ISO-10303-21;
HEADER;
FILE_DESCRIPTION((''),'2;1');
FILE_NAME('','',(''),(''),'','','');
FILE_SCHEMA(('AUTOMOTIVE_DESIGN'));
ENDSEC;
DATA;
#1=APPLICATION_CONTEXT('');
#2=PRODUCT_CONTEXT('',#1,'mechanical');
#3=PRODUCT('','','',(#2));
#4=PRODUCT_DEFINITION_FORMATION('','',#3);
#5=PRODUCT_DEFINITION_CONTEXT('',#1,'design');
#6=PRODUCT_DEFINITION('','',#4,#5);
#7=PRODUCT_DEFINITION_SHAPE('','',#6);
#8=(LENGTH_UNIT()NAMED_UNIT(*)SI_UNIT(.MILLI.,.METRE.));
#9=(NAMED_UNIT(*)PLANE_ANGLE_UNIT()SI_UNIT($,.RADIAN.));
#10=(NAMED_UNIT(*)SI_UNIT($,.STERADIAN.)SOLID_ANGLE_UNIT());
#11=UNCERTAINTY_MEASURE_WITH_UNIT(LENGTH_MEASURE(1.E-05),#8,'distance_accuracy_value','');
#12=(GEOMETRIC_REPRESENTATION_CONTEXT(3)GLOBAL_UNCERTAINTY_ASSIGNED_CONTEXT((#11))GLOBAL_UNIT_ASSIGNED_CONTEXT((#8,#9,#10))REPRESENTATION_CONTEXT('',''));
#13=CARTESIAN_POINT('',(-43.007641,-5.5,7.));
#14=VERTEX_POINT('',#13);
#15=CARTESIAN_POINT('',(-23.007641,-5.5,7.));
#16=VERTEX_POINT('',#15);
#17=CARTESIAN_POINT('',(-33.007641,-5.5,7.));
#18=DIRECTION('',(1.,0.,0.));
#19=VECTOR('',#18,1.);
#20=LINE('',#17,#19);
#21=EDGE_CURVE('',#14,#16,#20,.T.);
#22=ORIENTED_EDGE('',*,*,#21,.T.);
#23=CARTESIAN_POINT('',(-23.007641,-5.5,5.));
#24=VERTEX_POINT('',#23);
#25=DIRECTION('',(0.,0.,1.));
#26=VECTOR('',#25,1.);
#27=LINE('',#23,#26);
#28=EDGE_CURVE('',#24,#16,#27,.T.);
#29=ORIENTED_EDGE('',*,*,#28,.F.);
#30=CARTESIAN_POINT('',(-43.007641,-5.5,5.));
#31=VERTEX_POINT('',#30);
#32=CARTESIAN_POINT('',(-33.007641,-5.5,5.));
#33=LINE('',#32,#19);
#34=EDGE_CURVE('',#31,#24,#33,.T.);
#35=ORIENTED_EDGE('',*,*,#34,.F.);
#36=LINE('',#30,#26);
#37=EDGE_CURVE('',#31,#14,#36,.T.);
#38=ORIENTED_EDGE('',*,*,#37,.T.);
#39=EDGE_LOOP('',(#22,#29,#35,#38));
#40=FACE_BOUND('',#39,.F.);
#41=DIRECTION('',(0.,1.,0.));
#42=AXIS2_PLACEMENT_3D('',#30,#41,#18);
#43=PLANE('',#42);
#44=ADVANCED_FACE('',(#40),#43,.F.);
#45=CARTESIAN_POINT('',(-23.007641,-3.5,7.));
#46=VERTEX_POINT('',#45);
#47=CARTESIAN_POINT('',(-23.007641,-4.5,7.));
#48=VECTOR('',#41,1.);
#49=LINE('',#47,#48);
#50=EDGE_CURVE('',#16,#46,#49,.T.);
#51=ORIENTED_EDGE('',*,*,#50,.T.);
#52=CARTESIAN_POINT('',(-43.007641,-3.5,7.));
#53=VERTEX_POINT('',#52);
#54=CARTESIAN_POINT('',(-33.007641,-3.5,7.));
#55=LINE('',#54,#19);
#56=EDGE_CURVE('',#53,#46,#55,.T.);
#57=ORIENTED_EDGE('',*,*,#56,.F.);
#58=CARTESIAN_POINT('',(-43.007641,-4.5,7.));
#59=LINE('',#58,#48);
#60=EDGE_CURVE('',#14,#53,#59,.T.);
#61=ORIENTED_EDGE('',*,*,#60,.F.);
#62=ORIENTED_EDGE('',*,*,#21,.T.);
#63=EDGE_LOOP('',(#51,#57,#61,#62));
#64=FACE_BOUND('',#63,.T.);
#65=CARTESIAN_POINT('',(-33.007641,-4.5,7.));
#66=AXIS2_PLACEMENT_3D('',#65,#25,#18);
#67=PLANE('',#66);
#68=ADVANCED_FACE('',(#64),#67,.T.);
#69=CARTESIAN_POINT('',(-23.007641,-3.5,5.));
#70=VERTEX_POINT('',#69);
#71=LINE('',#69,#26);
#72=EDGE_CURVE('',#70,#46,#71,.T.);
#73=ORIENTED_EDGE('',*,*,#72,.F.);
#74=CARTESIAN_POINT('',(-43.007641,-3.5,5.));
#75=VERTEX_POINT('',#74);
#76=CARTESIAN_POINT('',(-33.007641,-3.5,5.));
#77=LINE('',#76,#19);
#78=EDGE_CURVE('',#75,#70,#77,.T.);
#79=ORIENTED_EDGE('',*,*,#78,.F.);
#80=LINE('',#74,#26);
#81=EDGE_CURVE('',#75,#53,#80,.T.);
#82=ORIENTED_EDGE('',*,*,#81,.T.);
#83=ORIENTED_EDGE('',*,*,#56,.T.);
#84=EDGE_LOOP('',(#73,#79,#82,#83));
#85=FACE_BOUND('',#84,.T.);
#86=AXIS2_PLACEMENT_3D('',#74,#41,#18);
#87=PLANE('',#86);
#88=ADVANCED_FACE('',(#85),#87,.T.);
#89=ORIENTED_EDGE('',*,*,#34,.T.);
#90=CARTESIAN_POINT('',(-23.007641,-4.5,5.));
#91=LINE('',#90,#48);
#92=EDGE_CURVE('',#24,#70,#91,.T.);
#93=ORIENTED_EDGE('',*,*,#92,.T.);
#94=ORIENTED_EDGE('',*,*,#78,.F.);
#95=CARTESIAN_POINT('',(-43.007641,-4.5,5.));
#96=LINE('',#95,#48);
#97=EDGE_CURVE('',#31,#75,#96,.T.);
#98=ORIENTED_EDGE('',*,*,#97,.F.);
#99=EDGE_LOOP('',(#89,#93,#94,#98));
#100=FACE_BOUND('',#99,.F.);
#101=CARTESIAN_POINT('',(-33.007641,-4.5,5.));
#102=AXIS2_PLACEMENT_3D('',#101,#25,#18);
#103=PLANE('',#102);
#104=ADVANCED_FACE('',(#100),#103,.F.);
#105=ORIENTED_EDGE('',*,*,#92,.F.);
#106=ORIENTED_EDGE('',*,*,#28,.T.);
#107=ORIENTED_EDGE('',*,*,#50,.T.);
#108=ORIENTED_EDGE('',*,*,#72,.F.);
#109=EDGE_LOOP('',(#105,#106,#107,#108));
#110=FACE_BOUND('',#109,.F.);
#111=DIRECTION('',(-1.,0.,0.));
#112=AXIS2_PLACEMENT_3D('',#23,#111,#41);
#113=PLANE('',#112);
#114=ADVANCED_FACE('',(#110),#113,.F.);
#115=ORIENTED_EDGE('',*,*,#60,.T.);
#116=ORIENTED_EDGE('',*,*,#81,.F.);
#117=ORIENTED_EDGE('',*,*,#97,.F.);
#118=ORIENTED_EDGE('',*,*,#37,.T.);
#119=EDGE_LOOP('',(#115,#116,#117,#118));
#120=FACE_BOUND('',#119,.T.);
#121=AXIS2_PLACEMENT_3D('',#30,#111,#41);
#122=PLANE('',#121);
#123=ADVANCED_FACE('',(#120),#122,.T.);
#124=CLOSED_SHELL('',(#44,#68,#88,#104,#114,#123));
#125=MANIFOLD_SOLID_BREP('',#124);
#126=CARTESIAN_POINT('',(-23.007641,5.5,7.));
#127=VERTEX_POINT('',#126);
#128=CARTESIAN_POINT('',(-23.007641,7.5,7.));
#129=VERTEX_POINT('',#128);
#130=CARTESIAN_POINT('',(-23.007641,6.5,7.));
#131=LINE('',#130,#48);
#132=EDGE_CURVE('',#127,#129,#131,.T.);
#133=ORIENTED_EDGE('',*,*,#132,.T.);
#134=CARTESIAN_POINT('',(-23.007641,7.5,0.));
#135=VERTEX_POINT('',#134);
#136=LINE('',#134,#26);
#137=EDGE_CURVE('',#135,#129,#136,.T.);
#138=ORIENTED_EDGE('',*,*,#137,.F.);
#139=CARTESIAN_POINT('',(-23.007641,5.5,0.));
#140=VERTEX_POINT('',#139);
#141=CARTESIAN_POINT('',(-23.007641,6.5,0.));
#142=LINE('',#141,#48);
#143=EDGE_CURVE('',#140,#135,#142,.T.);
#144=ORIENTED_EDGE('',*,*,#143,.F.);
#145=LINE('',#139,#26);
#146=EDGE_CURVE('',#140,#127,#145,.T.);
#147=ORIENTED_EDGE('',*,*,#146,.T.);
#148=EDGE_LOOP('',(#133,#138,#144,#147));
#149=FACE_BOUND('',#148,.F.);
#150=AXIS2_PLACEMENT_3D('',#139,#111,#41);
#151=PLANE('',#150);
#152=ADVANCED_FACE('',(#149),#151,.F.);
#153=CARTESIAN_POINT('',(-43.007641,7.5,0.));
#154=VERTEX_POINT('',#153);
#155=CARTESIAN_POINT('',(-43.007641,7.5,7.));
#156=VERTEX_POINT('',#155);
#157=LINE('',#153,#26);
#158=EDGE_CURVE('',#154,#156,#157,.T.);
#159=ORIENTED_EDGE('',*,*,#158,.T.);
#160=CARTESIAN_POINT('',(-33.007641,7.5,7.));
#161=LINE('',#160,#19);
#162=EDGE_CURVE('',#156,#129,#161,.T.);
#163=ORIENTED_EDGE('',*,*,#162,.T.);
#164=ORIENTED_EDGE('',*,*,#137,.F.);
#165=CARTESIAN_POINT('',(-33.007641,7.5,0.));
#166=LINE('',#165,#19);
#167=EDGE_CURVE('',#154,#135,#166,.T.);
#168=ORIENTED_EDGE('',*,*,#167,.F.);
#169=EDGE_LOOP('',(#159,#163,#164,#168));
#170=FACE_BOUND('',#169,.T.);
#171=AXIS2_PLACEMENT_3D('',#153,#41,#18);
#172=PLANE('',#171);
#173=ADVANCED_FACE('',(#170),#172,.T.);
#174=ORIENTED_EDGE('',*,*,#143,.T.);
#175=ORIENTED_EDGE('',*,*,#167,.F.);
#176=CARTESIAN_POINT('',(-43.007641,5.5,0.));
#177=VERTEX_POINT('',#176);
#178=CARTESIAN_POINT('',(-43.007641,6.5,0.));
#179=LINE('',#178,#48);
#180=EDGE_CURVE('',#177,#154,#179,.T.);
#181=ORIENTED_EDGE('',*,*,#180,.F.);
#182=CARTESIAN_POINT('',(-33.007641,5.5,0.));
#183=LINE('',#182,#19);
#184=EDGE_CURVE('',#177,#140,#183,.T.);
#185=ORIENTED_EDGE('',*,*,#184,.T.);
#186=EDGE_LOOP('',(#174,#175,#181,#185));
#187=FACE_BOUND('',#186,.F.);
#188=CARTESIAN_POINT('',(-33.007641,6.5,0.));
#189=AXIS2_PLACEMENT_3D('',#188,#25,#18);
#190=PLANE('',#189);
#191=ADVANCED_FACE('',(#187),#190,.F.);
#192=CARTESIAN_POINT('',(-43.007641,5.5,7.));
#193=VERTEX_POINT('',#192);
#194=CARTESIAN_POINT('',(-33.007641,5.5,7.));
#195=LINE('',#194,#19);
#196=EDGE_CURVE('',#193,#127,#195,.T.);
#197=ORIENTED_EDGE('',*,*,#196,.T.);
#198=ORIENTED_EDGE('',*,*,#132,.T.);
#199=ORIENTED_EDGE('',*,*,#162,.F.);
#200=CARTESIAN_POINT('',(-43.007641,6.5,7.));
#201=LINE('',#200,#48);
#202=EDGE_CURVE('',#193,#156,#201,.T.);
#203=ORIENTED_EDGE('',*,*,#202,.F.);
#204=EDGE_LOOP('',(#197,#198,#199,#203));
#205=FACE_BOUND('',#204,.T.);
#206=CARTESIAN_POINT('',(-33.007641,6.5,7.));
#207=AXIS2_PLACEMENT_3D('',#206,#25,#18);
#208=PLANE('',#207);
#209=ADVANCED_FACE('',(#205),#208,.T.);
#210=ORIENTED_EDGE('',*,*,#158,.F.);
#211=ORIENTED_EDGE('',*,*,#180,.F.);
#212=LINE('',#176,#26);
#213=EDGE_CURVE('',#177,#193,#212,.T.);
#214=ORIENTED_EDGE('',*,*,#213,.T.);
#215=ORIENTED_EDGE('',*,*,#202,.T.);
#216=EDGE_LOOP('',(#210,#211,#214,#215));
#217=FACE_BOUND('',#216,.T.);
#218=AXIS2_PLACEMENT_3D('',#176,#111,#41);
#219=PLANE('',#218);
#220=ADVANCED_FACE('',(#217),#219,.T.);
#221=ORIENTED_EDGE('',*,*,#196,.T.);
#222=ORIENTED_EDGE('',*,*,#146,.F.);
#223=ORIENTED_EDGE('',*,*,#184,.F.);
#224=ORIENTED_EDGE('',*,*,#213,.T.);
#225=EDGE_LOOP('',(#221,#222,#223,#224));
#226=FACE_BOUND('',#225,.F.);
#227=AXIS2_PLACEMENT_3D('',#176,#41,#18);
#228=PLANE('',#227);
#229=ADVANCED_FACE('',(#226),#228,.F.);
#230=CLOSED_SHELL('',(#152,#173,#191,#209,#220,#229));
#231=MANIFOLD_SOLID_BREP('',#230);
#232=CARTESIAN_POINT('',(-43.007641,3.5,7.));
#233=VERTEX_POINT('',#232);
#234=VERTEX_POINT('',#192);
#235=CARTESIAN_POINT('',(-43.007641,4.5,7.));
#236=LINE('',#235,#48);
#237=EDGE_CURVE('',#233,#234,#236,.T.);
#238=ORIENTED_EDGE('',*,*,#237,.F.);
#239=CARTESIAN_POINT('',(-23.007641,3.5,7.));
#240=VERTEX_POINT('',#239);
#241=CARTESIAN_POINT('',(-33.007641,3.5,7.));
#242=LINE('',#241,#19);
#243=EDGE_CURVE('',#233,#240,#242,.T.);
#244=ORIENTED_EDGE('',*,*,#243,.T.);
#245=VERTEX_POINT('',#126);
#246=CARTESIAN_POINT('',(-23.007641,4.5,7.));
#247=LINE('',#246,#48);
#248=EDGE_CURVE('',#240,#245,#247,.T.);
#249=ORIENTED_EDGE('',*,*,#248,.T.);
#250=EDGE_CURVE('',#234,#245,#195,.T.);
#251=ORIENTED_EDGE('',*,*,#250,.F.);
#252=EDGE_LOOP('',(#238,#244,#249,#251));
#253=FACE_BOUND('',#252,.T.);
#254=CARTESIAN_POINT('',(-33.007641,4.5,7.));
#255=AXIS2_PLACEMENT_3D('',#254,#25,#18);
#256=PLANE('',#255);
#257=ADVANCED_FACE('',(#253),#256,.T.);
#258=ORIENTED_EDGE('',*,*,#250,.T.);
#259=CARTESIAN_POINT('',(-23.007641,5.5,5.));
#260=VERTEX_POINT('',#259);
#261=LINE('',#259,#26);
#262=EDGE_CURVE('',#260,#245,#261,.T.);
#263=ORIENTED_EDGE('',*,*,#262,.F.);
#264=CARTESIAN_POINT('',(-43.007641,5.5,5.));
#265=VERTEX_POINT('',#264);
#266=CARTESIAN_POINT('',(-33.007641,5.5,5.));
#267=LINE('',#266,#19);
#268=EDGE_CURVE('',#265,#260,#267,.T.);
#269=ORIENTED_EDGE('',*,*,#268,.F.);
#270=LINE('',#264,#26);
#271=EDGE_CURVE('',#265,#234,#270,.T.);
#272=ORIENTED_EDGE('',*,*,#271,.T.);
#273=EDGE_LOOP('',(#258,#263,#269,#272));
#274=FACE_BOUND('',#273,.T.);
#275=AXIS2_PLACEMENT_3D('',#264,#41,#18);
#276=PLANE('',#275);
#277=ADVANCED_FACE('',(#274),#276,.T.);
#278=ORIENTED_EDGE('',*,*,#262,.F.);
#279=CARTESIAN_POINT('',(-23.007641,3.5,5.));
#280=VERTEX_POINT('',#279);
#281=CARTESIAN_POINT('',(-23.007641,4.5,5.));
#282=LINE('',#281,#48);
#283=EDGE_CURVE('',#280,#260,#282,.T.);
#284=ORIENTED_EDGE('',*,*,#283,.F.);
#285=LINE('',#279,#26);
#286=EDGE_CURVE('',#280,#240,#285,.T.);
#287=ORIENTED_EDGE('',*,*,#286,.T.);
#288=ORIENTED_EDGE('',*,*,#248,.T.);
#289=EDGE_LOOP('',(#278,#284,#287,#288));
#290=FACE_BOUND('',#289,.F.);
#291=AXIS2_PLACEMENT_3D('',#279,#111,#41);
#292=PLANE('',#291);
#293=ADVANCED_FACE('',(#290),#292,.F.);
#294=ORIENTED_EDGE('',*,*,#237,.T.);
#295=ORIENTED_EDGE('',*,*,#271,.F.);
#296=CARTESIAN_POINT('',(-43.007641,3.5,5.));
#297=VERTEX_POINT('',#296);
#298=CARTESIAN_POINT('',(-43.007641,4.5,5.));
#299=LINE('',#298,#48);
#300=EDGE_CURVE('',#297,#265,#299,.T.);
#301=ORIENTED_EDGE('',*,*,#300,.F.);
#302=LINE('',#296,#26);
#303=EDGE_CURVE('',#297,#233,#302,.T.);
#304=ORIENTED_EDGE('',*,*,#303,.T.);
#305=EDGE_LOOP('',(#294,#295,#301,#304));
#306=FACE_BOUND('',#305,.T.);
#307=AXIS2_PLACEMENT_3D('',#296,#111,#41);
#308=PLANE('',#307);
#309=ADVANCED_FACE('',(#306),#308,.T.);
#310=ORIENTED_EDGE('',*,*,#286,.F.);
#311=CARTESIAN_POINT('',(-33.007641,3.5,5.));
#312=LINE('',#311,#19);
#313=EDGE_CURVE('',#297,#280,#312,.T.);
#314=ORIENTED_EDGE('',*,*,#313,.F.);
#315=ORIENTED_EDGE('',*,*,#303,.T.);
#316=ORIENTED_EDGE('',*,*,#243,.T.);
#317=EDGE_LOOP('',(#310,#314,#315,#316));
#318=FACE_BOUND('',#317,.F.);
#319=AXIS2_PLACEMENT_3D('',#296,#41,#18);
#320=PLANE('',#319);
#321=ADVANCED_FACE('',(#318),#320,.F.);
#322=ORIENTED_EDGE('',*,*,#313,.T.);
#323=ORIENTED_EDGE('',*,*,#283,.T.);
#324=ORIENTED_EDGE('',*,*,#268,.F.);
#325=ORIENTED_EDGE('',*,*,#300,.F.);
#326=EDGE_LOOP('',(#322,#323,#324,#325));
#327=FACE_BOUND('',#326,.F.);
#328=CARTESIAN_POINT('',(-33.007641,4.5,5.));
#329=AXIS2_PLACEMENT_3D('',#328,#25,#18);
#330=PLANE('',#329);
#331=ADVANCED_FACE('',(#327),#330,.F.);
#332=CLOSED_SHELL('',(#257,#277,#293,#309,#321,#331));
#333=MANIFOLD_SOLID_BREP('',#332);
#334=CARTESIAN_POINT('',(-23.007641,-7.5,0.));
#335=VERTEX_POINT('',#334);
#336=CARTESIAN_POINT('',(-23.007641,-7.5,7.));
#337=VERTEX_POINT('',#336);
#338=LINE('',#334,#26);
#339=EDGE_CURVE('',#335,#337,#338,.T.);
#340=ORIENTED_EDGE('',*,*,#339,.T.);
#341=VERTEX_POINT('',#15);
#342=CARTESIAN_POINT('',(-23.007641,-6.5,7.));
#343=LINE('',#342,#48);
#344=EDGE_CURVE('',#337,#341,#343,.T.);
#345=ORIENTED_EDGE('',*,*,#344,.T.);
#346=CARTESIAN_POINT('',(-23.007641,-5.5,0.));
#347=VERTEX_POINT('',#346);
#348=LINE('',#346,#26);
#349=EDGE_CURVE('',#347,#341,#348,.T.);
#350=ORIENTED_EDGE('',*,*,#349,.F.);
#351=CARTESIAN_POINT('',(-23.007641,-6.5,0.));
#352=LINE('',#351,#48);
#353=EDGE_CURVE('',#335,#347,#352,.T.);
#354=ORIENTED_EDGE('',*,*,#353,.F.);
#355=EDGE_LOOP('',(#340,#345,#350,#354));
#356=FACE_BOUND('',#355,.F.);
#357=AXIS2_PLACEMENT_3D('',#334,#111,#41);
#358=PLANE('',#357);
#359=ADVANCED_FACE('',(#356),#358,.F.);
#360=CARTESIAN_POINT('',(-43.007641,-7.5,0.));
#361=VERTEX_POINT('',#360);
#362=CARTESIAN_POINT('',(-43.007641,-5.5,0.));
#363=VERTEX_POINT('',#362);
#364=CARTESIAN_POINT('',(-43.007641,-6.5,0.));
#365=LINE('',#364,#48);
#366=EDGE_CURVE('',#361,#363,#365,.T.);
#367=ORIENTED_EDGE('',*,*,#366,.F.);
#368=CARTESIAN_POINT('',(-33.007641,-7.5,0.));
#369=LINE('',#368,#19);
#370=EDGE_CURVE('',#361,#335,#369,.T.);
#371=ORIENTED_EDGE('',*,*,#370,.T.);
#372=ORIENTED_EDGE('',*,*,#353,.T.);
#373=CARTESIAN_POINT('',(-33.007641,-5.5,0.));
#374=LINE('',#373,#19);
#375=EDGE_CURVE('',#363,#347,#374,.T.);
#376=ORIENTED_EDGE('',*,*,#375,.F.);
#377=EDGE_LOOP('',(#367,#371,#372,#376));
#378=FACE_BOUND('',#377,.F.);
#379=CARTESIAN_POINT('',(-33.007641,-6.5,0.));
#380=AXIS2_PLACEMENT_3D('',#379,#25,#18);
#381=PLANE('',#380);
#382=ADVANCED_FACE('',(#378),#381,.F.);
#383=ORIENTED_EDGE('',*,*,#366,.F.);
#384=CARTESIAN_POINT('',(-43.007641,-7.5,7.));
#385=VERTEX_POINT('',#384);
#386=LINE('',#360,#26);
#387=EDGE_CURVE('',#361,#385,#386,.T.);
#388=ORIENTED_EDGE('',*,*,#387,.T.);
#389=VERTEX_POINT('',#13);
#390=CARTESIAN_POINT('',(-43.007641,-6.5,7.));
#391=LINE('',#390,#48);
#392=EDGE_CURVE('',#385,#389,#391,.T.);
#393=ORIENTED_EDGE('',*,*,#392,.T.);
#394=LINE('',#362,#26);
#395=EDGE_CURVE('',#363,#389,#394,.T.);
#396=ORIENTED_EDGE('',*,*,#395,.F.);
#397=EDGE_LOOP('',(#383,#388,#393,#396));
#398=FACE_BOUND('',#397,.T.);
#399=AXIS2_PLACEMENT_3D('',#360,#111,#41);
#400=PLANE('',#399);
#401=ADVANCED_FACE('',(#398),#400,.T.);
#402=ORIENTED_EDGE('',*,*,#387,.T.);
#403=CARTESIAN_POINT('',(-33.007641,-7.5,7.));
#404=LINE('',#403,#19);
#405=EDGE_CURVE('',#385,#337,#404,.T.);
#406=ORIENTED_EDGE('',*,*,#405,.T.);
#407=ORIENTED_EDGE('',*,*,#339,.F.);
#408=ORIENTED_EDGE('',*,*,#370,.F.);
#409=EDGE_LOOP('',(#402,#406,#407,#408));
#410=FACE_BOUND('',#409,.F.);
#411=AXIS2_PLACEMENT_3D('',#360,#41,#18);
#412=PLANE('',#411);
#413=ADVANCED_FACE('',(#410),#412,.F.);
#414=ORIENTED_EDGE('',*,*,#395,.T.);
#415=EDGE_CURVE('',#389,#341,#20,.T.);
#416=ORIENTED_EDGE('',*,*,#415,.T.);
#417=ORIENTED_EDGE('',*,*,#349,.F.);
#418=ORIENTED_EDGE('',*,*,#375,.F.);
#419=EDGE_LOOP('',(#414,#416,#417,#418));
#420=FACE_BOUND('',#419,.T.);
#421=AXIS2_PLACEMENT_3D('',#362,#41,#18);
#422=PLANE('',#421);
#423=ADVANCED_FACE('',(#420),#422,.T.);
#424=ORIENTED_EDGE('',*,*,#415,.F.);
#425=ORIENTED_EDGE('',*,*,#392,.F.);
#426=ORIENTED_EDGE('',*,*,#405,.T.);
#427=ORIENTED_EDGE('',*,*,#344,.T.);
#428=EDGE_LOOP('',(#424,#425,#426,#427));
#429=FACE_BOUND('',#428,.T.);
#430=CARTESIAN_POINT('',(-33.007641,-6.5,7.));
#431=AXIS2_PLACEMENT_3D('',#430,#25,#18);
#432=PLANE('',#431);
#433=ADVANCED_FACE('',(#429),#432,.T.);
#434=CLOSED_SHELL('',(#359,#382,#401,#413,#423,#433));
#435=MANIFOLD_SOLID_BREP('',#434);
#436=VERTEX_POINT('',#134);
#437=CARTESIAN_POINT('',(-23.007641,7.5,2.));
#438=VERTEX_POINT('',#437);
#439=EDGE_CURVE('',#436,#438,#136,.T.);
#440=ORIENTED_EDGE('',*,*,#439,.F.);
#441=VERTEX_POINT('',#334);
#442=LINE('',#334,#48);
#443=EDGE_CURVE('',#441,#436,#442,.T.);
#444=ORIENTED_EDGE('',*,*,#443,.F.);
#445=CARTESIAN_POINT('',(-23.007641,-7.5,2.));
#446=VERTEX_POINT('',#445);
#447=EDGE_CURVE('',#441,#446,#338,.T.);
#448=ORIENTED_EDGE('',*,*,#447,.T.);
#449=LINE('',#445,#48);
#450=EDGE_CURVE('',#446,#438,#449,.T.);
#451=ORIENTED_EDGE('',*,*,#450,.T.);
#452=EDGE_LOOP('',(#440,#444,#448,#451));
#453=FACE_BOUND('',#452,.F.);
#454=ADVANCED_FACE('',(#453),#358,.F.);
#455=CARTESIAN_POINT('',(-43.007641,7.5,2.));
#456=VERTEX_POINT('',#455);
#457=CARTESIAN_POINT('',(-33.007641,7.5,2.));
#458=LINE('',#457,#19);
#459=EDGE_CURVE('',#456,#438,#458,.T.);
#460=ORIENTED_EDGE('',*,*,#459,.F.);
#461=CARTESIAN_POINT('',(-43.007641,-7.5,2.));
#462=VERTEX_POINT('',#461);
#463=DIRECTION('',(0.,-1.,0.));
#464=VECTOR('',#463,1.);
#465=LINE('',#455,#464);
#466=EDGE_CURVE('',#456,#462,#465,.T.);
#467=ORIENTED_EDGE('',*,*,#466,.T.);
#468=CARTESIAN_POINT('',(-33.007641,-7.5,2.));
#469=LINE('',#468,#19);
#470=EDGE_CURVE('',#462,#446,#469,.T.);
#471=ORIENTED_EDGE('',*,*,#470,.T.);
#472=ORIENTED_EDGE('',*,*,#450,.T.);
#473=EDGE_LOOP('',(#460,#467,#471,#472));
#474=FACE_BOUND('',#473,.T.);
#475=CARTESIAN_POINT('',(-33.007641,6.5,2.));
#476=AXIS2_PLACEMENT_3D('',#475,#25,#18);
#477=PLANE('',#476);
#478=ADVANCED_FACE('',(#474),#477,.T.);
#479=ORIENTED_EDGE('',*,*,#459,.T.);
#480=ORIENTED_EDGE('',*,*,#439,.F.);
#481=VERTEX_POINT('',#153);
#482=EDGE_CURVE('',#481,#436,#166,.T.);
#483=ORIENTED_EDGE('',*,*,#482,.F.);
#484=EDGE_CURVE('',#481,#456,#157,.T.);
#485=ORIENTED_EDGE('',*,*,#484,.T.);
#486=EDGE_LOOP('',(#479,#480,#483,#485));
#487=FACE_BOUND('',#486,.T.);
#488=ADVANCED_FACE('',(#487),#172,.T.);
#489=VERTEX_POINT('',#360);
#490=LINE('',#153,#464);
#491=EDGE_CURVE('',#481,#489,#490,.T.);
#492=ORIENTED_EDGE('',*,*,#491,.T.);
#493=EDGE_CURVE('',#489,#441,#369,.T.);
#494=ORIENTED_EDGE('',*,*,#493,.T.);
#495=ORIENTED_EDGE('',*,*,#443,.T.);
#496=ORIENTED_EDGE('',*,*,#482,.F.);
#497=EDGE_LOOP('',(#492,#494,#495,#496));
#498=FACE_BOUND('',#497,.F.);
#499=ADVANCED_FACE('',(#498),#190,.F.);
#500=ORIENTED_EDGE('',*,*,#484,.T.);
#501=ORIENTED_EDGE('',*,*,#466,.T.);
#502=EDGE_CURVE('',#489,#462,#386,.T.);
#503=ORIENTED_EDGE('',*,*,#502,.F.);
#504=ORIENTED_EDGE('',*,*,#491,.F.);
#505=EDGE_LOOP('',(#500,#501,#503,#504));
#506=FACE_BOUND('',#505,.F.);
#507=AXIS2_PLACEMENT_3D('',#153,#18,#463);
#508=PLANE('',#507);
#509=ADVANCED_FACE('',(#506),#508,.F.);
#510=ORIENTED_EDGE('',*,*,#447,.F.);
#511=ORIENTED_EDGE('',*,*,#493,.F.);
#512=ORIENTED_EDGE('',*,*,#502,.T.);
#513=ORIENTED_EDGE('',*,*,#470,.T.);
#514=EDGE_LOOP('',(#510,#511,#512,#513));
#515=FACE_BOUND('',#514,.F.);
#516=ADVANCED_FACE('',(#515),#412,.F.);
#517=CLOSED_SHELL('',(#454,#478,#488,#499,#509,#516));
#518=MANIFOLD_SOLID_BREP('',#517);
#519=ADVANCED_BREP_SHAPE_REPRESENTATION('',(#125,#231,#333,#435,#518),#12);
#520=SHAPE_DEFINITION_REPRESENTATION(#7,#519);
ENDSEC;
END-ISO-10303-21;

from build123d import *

# Parameters (mm, degrees)
F0_W     = 20
F0_H     = 2
F1_DEPTH = 7
F0_H_2   = 7
F2_DEPTH = 2
F3_START = 5
F3_DEPTH = 2


with BuildPart() as f1:
    # F0 (on Top) → F1 (new body)
    with BuildSketch(Plane.XY):
        with Locations((-33.0076411562, -6.5)):
            Rectangle(F0_W, F0_H)
    extrude(amount=F1_DEPTH)


with BuildPart() as f1b:
    # F0 (on Top) → F1, piece 2 (new body)
    with BuildSketch(Plane.XY):
        with Locations((-33.0076411562, 6.5)):
            Rectangle(F0_W, F0_H)
    extrude(amount=F1_DEPTH)


with BuildPart() as f2:
    # F0 (on Top) → F2 (new body)
    with BuildSketch(Plane.XY):
        with Locations((-33.0076411562, 6.5)):
            Rectangle(F0_W, F0_H)
        with Locations((-33.0076411562, 4.5)):
            Rectangle(F0_W, F0_H)
        with Locations((-33.0076411562, 0)):
            Rectangle(F0_W, F0_H_2)
        with Locations((-33.0076411562, -4.5)):
            Rectangle(F0_W, F0_H)
        with Locations((-33.0076411562, -6.5)):
            Rectangle(F0_W, F0_H)
    extrude(amount=F2_DEPTH)


with BuildPart() as f3:
    # F0 (on Top) → F3 (new body)
    with BuildSketch(Plane.XY.offset(F3_START)):
        with Locations((-33.0076411562, 4.5)):
            Rectangle(F0_W, F0_H)
    extrude(amount=F3_DEPTH)


with BuildPart() as f3b:
    # F0 (on Top) → F3, piece 2 (new body)
    with BuildSketch(Plane.XY.offset(F3_START)):
        with Locations((-33.0076411562, -4.5)):
            Rectangle(F0_W, F0_H)
    extrude(amount=F3_DEPTH)


solid = Compound([f1.part, f1b.part, f2.part, f3.part, f3b.part])
